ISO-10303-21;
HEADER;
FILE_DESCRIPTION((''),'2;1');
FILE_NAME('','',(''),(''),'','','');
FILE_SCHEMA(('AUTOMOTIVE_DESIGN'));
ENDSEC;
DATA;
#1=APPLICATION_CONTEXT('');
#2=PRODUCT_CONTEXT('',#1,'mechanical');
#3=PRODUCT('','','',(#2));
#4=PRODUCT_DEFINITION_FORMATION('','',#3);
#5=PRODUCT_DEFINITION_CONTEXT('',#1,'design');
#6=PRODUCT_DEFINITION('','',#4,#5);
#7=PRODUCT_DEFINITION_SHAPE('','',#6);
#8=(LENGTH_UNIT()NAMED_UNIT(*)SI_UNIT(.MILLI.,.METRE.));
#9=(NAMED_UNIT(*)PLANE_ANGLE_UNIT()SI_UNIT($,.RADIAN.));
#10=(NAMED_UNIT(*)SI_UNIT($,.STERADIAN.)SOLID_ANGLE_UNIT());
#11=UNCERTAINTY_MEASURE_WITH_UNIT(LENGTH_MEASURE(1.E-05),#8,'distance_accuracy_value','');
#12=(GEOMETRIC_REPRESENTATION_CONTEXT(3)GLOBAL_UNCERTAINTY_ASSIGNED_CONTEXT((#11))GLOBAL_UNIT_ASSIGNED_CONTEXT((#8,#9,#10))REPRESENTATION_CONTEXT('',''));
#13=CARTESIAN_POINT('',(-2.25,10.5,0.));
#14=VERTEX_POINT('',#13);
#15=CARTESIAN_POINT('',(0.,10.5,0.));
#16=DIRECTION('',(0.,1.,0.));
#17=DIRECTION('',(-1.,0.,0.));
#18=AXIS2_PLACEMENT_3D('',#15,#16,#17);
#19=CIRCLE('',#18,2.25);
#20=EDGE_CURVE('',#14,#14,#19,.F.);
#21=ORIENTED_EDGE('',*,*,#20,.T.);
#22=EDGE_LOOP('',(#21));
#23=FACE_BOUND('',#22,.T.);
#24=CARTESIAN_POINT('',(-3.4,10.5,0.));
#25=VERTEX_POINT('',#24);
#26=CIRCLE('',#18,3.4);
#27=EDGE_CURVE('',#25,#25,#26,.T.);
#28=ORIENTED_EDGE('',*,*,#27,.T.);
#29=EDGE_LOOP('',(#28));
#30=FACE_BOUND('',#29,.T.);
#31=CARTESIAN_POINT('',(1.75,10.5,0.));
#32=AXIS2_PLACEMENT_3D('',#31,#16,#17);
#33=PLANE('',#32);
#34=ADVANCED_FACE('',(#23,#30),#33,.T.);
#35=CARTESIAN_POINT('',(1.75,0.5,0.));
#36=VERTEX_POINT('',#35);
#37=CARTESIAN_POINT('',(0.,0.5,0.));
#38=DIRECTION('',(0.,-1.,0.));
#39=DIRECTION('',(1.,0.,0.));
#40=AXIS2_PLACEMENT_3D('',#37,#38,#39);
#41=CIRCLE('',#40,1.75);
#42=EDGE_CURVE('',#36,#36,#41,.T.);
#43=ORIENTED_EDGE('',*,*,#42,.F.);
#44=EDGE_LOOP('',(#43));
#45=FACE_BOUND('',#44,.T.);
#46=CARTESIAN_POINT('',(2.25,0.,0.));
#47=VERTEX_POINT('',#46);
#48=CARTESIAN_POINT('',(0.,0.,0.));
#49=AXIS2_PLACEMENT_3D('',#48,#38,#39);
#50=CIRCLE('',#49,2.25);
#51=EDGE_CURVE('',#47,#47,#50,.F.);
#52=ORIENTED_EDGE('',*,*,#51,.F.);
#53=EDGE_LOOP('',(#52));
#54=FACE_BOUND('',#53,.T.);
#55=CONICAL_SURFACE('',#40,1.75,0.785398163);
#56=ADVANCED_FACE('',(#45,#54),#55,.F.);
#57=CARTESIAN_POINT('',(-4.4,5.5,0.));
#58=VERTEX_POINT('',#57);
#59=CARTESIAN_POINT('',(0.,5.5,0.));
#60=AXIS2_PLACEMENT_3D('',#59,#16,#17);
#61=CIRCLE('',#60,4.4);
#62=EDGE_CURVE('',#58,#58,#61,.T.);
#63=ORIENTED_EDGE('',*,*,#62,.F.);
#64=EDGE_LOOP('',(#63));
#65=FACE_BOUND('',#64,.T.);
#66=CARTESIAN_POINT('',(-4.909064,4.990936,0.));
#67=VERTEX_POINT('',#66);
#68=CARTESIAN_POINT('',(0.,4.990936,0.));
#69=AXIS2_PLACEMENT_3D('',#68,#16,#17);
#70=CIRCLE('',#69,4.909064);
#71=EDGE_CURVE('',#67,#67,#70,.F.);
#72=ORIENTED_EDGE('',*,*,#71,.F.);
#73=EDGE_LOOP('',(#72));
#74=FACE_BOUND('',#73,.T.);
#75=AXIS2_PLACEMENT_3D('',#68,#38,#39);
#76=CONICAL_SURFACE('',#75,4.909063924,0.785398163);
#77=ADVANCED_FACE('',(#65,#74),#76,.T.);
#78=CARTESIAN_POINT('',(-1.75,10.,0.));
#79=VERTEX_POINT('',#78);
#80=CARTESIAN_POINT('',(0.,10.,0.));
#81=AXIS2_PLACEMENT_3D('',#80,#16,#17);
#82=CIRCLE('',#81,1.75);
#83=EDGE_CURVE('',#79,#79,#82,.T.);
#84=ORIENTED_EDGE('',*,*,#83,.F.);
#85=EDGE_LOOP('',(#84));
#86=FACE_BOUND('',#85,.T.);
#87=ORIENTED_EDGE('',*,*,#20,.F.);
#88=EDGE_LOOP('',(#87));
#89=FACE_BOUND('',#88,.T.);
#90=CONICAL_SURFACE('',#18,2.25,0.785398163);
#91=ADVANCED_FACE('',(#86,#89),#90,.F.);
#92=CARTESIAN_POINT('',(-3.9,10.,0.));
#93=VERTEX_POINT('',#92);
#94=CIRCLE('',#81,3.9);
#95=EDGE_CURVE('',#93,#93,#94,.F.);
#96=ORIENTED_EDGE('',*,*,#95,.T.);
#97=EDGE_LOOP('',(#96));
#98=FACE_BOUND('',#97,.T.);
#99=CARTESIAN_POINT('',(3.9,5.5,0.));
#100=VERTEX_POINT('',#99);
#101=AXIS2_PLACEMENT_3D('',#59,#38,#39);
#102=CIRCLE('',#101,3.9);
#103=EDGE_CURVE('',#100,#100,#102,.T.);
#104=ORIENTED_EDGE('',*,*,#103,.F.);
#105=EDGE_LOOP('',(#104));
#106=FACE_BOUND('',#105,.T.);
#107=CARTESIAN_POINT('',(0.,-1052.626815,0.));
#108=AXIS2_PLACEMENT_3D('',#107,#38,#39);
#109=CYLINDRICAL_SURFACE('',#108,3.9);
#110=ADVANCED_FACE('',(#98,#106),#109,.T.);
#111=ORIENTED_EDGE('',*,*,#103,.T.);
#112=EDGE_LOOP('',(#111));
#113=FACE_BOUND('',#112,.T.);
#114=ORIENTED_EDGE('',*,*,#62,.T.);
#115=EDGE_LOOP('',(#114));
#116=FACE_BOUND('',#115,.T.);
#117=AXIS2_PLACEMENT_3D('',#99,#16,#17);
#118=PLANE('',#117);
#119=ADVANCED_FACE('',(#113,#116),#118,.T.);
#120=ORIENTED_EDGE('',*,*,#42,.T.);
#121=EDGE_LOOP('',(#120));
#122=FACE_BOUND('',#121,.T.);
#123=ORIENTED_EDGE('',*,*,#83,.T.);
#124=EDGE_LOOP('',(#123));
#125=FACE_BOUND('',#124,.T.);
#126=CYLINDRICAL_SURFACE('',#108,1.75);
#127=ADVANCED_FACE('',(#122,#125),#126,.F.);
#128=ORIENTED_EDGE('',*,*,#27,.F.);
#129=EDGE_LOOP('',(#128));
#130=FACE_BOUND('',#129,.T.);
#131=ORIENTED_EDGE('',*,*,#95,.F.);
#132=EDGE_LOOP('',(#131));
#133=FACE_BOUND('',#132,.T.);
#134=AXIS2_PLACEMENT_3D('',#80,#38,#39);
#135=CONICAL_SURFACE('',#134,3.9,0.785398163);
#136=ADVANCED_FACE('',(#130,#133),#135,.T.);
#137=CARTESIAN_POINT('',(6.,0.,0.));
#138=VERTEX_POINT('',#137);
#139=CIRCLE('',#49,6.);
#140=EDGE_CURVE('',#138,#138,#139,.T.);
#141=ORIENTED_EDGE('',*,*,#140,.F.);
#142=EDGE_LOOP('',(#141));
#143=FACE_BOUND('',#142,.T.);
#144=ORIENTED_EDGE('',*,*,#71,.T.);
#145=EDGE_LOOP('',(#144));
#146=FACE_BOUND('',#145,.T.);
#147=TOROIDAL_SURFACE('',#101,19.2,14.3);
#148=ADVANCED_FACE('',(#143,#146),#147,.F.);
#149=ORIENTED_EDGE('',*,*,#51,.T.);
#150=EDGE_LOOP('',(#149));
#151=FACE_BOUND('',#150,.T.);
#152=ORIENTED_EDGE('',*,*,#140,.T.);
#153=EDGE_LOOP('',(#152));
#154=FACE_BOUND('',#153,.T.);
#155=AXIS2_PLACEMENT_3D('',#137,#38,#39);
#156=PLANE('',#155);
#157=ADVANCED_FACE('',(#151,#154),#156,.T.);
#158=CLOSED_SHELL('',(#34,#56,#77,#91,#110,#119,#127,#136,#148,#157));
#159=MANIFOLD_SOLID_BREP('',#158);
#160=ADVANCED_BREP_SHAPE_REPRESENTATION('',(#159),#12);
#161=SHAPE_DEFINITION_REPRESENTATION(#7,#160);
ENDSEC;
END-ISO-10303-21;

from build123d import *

# Parameters (mm, degrees)
CHAMFER1_SIZE = 0.5


with BuildPart() as part:
    # Sketch1 → Revolve1 (revolve)
    with BuildSketch(Plane.XY):
        with BuildLine():
            Line((1.75, 0), (1.75, 10.5))
            Line((1.75, 10.5), (3.9, 10.5))
            Line((3.9, 10.5), (3.9, 5.5))
            Line((3.9, 5.5), (4.9, 5.5))
            ThreePointArc((4.9, 5.5), (5.177696338, 2.695539268), (6, 0))
            Line((6, 0), (1.75, 0))
        make_face()
    revolve(axis=Axis((0, -1052.626814563, 0), (0, 1, 0)))

    # Chamfer1
    # the kernel refuses this chamfer: 0.5 mm, written as the material it takes off along each edge
    with BuildSketch(Plane(origin=(0, 0, 0), x_dir=(1, 0, 0), z_dir=(0, 0, 1))) as chamfer1_piece_1:
        Polygon((1.75 + CHAMFER1_SIZE, 0), (1.75, CHAMFER1_SIZE), (1.75, 0), align=None)
    revolve(axis=Axis((0, 0, 0), (0, 1, 0)), mode=Mode.SUBTRACT)
    with BuildSketch(Plane(origin=(0, 10.5, 0), x_dir=(1, 0, 0), z_dir=(0, 0, 1))) as chamfer1_piece_2:
        Polygon((1.75, -CHAMFER1_SIZE), (1.75 + CHAMFER1_SIZE, 0), (1.75, 0), align=None)
    revolve(axis=Axis((0, 10.5, 0), (0, 1, 0)), mode=Mode.SUBTRACT)
    with BuildSketch(Plane(origin=(0, 10.5, 0), x_dir=(1, 0, 0), z_dir=(0, 0, 1))) as chamfer1_piece_3:
        Polygon((3.9 - CHAMFER1_SIZE, 0), (3.9, -CHAMFER1_SIZE), (3.9, 0), align=None)
    revolve(axis=Axis((0, 10.5, 0), (0, 1, 0)), mode=Mode.SUBTRACT)
    with BuildSketch(Plane(origin=(0, 5.5, 0), x_dir=(1, 0, 0), z_dir=(0, 0, 1))) as chamfer1_piece_4:
        with BuildLine():
            Line((4.9 - CHAMFER1_SIZE, 0), (4.909063924, -0.509063924))
            ThreePointArc((4.909063924, -0.509063924), (4.902396158, -0.261771596), (4.9, 0))
            Line((4.9, 0), (4.9 - CHAMFER1_SIZE, 0))
        make_face()
    revolve(axis=Axis((0, 5.5, 0), (0, 1, 0)), mode=Mode.SUBTRACT)


solid = part.part
